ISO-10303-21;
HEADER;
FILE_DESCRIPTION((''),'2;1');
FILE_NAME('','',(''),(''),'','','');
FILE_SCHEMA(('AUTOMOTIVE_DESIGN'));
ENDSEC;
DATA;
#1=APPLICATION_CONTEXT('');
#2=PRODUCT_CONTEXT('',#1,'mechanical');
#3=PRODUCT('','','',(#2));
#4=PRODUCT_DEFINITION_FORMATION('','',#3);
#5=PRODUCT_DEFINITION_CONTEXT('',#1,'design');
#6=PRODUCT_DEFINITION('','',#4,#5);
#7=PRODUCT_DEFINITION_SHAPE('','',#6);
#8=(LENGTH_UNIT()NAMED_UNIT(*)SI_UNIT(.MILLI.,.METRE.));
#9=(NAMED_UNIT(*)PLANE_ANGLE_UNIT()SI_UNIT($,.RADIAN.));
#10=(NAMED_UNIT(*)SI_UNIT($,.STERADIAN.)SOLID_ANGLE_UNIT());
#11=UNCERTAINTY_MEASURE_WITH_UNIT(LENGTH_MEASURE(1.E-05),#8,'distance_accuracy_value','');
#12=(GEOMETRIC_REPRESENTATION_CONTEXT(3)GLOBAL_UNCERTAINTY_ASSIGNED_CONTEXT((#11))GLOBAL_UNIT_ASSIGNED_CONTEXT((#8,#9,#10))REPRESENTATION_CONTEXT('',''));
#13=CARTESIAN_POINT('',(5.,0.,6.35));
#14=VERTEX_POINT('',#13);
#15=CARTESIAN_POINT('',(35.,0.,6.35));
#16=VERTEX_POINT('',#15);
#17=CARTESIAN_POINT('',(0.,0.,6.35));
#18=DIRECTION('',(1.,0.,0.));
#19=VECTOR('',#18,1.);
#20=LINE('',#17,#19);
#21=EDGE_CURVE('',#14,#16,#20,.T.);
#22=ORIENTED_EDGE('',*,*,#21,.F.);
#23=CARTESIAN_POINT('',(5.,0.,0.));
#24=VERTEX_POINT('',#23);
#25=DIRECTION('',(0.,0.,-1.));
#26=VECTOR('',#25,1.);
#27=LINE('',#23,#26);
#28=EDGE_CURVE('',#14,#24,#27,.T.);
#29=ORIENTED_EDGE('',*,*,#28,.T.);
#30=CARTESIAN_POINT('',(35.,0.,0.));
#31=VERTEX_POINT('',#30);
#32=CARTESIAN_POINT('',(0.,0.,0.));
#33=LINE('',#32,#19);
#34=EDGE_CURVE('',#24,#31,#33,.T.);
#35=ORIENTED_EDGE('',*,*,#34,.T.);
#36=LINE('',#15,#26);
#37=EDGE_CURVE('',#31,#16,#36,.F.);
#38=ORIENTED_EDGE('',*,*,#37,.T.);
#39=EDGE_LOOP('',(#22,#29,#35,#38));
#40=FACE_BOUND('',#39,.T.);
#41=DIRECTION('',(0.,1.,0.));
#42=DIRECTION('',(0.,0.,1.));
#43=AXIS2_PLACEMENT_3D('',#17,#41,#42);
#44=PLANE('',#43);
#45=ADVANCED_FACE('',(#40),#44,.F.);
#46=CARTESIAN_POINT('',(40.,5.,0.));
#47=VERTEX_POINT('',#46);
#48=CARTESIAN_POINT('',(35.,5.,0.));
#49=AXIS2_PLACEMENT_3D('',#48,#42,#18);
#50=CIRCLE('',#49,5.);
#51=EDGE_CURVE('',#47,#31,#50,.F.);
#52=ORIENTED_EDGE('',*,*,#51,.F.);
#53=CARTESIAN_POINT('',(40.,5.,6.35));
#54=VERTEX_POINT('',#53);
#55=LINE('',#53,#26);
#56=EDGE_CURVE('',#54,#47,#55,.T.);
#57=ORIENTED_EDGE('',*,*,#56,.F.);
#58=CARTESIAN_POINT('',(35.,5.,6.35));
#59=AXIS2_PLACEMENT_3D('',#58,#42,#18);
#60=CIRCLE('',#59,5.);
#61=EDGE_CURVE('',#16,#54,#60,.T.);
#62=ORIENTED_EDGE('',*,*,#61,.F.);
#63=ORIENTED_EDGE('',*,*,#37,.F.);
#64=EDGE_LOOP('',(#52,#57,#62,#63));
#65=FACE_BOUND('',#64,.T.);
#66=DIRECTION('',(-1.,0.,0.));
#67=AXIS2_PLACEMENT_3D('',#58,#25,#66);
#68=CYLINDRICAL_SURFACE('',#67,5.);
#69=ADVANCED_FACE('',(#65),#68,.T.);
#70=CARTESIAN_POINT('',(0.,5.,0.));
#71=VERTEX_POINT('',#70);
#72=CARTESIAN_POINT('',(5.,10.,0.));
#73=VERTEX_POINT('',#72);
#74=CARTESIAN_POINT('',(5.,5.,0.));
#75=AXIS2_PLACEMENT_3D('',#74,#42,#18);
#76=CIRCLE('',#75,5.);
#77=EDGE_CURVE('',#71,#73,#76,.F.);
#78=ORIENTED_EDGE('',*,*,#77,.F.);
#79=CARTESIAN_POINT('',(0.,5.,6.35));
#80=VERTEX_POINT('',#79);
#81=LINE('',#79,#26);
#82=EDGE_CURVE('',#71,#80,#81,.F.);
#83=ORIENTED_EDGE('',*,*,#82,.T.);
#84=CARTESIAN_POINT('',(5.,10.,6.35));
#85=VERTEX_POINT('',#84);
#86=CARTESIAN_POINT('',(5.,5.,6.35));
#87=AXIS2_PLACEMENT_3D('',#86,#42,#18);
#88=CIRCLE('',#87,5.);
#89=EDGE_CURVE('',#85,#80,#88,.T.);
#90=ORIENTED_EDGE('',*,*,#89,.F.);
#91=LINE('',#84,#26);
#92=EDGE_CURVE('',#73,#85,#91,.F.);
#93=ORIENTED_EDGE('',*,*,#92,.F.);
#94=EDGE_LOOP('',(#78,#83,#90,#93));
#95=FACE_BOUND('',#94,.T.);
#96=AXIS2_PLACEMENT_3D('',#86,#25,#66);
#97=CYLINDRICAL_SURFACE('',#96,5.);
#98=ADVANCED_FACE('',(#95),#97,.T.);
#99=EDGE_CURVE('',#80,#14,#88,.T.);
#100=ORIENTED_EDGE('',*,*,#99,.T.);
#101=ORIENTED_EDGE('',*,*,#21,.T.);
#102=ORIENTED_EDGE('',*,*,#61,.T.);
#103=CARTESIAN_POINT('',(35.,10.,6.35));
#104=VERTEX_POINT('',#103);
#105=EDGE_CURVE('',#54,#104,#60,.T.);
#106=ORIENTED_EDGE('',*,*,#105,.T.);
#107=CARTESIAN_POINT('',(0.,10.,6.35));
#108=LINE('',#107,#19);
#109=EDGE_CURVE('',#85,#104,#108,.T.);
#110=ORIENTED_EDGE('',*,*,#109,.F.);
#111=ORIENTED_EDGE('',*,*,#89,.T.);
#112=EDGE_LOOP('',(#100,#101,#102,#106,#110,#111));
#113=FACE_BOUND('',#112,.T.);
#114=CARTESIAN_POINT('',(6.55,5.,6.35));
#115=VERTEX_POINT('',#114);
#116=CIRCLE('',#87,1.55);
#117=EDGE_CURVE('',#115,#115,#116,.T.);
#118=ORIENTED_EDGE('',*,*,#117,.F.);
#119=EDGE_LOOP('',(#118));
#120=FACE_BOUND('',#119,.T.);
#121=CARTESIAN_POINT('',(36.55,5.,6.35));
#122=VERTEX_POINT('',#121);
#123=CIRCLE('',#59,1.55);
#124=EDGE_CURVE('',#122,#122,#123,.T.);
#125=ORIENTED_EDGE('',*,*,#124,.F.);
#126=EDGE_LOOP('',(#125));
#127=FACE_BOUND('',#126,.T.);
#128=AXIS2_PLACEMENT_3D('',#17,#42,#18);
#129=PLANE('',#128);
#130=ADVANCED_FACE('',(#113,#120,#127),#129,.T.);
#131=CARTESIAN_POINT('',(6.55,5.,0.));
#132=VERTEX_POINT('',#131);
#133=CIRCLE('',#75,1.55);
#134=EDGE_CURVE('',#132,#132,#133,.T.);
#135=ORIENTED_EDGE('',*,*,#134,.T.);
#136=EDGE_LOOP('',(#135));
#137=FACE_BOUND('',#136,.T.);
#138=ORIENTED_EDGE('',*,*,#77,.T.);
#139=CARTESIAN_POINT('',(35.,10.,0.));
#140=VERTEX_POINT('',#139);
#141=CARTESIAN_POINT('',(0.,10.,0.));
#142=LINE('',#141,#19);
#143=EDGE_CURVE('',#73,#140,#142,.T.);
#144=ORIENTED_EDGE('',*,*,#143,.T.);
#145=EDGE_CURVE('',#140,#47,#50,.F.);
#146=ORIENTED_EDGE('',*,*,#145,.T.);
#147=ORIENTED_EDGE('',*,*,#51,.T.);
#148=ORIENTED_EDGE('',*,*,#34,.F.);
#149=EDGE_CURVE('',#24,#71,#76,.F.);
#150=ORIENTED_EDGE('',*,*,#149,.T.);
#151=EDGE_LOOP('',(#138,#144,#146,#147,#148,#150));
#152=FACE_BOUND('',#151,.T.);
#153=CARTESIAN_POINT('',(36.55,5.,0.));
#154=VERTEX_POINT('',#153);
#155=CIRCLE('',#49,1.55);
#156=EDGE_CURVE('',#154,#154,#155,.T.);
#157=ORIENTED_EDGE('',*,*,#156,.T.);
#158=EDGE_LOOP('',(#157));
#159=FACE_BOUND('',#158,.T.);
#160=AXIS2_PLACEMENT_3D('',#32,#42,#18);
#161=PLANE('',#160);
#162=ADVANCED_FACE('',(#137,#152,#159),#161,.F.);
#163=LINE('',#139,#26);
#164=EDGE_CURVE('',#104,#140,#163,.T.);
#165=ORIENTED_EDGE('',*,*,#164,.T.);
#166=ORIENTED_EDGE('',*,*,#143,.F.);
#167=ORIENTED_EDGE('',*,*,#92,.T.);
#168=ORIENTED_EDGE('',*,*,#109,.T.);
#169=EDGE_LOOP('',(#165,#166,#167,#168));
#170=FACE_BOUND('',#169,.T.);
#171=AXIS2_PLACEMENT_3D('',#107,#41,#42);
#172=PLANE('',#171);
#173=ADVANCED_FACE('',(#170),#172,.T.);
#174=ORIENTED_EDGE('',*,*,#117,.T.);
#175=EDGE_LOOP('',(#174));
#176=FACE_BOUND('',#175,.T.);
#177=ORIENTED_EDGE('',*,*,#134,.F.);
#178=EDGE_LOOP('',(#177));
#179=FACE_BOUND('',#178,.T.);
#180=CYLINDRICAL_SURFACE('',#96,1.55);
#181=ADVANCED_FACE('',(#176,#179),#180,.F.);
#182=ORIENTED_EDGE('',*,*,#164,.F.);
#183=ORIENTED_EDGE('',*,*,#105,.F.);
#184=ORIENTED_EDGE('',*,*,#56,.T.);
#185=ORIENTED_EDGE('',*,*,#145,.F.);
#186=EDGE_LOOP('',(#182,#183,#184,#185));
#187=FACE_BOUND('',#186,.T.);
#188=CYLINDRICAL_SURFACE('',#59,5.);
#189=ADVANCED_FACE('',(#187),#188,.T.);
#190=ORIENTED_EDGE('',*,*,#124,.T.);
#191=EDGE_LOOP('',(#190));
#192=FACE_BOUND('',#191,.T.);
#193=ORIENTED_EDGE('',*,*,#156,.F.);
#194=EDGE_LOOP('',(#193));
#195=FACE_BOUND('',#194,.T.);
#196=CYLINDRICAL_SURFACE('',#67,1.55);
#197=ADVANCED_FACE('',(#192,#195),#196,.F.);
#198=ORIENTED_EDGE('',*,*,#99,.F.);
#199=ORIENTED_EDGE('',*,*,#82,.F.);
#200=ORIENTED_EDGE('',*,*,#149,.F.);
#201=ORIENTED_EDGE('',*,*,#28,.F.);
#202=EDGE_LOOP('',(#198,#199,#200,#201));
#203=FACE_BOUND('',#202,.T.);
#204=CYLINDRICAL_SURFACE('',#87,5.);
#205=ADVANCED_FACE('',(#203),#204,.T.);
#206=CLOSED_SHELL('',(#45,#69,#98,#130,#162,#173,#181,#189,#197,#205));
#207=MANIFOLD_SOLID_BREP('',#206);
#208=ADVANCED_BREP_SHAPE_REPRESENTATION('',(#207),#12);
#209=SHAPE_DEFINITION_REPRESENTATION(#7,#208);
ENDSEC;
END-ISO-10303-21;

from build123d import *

# Parameters (mm, degrees)
SKETCH1_W           = 40
SKETCH1_H           = 10
SKETCH1_R           = 1.55
BOSS_EXTRUDE1_DEPTH = 6.35
FILLET1_R           = 5


with BuildPart() as part:
    # Sketch1 → Boss-Extrude1 (new body)
    with BuildSketch(Plane.XY):
        with Locations((20, 5)):
            Rectangle(SKETCH1_W, SKETCH1_H)
        with Locations((35, 5)):
            Circle(SKETCH1_R, mode=Mode.SUBTRACT)
        with Locations((5, 5)):
            Circle(SKETCH1_R, mode=Mode.SUBTRACT)
    extrude(amount=BOSS_EXTRUDE1_DEPTH)

    # Fillet1
    fillet1_edges = [part.edges().sort_by_distance(p)[0] for p in [
        (0, 10, 3.175),
        (0, 0, 3.175),
        (40, 10, 3.175),
        (40, 0, 3.175),
    ]]
    fillet(fillet1_edges, radius=FILLET1_R - 0.0001)  # a hair under: the kernel refuses the full size


solid = part.part
